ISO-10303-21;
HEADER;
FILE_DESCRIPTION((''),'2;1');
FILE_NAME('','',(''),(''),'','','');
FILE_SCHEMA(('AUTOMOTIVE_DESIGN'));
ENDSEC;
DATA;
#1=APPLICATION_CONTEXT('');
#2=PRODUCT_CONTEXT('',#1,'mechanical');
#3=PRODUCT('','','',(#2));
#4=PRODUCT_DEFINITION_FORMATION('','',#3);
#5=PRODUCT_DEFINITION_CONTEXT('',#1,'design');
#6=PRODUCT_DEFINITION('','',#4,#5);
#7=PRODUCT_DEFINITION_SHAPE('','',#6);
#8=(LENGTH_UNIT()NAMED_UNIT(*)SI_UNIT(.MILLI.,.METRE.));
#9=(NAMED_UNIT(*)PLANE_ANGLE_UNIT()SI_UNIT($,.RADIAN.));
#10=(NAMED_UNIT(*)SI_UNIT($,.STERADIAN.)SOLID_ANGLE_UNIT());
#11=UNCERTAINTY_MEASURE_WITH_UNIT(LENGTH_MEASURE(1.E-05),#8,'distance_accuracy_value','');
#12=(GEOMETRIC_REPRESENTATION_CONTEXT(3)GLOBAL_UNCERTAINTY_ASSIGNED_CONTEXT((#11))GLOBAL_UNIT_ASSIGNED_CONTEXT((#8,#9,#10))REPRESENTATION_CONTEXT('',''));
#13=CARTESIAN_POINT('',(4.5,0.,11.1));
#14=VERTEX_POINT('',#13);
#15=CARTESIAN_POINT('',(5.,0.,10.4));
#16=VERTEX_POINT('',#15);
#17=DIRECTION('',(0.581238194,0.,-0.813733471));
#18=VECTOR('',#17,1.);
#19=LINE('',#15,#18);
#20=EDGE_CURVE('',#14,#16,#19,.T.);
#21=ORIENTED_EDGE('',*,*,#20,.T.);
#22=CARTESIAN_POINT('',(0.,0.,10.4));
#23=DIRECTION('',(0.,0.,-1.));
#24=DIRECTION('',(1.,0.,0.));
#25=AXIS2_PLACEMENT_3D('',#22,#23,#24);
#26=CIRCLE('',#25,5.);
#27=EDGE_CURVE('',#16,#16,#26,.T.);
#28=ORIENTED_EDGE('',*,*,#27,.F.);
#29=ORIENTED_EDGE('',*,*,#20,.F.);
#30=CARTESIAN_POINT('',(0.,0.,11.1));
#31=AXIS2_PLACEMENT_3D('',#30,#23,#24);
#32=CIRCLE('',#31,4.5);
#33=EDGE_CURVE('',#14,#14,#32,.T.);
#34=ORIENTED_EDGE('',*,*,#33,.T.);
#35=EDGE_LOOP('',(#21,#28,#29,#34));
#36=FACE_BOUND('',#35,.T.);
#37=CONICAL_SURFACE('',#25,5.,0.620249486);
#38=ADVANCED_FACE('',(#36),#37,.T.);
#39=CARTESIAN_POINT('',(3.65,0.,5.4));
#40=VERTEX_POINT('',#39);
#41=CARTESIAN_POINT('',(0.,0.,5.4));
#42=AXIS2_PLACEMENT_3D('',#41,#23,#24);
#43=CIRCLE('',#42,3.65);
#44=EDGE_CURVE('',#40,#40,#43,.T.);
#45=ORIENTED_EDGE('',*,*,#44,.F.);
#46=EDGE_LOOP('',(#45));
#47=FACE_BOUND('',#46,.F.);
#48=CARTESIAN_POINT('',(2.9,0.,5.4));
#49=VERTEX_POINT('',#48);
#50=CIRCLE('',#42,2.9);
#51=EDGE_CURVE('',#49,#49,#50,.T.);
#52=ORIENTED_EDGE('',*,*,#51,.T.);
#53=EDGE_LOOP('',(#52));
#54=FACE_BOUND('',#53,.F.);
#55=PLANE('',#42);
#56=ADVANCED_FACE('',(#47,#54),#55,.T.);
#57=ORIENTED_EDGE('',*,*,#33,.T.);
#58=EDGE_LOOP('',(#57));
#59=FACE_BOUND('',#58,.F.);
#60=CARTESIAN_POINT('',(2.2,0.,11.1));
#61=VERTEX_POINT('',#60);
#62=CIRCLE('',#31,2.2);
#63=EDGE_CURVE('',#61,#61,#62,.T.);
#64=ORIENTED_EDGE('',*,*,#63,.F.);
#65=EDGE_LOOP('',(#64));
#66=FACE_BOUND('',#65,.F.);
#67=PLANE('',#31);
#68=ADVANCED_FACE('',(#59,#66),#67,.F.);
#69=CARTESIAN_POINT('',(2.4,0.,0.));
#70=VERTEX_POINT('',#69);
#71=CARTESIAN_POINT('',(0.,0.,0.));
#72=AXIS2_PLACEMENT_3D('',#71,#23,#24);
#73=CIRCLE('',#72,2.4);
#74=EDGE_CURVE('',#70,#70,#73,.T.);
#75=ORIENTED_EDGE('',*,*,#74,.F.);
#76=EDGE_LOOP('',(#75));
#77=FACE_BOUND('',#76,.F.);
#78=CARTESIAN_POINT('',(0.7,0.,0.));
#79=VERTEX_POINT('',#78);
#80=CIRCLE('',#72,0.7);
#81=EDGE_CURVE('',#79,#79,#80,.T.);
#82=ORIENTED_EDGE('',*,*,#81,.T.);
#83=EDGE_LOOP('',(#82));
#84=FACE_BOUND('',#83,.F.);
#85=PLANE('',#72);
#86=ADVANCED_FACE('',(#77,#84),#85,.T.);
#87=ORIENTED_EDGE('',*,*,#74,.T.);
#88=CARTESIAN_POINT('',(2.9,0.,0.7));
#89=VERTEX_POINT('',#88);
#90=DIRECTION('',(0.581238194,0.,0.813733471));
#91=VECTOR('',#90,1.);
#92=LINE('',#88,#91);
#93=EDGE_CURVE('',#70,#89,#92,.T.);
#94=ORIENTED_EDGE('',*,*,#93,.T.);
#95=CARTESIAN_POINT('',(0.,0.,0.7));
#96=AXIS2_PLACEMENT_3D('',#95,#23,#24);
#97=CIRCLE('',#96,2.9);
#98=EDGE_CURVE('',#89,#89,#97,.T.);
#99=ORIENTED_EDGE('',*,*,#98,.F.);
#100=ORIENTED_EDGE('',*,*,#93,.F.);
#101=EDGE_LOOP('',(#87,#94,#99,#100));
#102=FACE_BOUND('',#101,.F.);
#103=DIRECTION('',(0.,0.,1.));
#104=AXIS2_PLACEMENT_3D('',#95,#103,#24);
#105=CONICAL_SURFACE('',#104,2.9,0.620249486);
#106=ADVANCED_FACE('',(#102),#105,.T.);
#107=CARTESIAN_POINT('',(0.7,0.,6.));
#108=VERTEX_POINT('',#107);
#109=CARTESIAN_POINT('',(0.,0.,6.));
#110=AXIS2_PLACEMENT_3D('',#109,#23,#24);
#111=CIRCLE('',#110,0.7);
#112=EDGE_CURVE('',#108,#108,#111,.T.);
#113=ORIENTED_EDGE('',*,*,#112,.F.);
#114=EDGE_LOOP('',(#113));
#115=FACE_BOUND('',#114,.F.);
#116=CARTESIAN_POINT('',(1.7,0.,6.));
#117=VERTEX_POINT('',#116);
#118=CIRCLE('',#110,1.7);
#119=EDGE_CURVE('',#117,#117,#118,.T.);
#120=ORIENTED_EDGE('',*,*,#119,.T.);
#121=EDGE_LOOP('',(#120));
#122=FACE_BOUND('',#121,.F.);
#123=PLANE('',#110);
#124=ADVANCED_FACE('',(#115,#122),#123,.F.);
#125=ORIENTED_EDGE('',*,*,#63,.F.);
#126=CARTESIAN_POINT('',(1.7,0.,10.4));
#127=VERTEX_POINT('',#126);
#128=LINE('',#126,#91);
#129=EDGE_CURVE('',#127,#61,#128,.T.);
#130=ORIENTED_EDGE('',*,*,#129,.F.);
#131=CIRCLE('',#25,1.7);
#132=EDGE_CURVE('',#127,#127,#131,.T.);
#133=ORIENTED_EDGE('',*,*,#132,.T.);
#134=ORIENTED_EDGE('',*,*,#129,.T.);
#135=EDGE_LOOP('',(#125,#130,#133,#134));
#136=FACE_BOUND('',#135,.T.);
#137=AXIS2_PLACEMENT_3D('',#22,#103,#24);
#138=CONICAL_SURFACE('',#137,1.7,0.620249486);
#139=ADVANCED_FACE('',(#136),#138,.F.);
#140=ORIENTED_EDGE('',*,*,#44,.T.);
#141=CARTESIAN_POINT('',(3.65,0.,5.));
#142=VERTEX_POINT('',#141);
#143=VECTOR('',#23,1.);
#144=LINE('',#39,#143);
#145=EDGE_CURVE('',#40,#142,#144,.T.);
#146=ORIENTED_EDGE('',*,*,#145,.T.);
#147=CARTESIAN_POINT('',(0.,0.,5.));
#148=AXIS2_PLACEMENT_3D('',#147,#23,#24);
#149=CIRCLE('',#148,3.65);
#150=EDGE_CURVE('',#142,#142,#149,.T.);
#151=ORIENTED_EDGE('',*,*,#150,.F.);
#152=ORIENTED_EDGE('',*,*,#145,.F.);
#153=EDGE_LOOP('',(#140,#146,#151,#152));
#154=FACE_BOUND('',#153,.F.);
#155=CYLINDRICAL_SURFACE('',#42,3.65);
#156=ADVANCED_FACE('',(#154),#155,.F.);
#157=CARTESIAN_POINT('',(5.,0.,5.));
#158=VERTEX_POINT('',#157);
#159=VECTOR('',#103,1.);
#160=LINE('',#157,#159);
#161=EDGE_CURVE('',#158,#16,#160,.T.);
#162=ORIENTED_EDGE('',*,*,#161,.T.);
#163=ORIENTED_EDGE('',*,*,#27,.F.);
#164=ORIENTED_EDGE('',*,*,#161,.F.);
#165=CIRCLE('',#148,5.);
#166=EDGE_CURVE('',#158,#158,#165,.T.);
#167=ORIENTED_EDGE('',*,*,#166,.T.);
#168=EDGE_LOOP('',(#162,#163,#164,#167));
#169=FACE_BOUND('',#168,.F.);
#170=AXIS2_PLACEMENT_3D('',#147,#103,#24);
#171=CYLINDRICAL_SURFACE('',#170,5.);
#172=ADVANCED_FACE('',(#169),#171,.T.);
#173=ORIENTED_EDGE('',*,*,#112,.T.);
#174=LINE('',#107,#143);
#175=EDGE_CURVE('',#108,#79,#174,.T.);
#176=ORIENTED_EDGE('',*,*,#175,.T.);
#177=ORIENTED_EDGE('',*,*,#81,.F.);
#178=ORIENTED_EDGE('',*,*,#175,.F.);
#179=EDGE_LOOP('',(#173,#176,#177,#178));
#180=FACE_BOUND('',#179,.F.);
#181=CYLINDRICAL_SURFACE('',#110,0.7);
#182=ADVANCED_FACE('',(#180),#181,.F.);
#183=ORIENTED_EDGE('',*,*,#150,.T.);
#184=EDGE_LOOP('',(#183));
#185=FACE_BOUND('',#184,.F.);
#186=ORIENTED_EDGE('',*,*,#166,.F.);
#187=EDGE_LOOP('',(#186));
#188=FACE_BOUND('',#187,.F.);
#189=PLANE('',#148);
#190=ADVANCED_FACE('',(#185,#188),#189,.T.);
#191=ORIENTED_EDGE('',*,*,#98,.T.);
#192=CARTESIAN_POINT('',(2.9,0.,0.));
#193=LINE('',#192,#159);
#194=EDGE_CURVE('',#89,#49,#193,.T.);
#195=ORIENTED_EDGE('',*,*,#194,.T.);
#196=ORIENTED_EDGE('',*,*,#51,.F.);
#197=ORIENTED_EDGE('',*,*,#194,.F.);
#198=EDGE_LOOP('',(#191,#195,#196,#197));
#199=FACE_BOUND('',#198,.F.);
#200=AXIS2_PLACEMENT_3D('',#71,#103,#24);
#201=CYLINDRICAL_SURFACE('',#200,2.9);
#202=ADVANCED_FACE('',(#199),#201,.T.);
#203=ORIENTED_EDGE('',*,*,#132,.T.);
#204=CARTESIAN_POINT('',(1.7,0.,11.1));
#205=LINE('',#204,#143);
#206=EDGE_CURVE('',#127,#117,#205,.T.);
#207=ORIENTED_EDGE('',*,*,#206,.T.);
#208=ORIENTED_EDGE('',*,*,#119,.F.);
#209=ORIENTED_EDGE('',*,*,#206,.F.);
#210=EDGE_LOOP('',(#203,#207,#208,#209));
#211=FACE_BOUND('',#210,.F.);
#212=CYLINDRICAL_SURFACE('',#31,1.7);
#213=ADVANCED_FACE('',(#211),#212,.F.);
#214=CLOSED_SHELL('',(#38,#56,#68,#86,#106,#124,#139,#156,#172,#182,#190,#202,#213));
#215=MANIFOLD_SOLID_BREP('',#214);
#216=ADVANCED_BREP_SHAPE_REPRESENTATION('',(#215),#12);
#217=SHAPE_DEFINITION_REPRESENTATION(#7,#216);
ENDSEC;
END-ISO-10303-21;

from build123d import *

# Parameters (mm, degrees)
F2_C1_SIZE2 = 0.5
F2_C1_SIZE  = 0.7
F2_C2_SIZE2 = 0.7
F2_C2_SIZE  = 0.5
F2_C3_SIZE2 = 0.7
F2_C3_SIZE  = 0.5


with BuildPart() as f1:
    # F0 (on Front) → F1 (revolve)
    with BuildSketch(Plane.XZ):
        Polygon((0.7, 6), (0.7, 0), (2.9, 0), (2.9, 5.4), (3.65, 5.4), (3.65, 5), (5, 5), (5, 11.1), (1.7, 11.1), (1.7, 6), align=None)
    revolve(axis=Axis((0, 0, 5.55), (0, 0, -1)))

    # F2: chamfer of 0.7 x 0.5 on 3 edges, made by hand

    # F2_c1
    f2_c1_edges = [f1.edges().sort_by_distance(p)[0] for p in [
        (-1.7, 0, 11.1),
    ]]
    f2_c1_side = f1.faces().sort_by_distance((-1.7, 0, 11.09))[0]
    chamfer(f2_c1_edges, length=F2_C1_SIZE, length2=F2_C1_SIZE2, reference=f2_c1_side)

    # F2_c2
    f2_c2_edges = [f1.edges().sort_by_distance(p)[0] for p in [
        (-2.9, 0, 0),
    ]]
    f2_c2_side = f1.faces().sort_by_distance((-2.89, 0, 0))[0]
    chamfer(f2_c2_edges, length=F2_C2_SIZE, length2=F2_C2_SIZE2, reference=f2_c2_side)

    # F2_c3
    f2_c3_edges = [f1.edges().sort_by_distance(p)[0] for p in [
        (-5, 0, 11.1),
    ]]
    f2_c3_side = f1.faces().sort_by_distance((-4.99, 0, 11.1))[0]
    chamfer(f2_c3_edges, length=F2_C3_SIZE, length2=F2_C3_SIZE2, reference=f2_c3_side)


solid = f1.part
